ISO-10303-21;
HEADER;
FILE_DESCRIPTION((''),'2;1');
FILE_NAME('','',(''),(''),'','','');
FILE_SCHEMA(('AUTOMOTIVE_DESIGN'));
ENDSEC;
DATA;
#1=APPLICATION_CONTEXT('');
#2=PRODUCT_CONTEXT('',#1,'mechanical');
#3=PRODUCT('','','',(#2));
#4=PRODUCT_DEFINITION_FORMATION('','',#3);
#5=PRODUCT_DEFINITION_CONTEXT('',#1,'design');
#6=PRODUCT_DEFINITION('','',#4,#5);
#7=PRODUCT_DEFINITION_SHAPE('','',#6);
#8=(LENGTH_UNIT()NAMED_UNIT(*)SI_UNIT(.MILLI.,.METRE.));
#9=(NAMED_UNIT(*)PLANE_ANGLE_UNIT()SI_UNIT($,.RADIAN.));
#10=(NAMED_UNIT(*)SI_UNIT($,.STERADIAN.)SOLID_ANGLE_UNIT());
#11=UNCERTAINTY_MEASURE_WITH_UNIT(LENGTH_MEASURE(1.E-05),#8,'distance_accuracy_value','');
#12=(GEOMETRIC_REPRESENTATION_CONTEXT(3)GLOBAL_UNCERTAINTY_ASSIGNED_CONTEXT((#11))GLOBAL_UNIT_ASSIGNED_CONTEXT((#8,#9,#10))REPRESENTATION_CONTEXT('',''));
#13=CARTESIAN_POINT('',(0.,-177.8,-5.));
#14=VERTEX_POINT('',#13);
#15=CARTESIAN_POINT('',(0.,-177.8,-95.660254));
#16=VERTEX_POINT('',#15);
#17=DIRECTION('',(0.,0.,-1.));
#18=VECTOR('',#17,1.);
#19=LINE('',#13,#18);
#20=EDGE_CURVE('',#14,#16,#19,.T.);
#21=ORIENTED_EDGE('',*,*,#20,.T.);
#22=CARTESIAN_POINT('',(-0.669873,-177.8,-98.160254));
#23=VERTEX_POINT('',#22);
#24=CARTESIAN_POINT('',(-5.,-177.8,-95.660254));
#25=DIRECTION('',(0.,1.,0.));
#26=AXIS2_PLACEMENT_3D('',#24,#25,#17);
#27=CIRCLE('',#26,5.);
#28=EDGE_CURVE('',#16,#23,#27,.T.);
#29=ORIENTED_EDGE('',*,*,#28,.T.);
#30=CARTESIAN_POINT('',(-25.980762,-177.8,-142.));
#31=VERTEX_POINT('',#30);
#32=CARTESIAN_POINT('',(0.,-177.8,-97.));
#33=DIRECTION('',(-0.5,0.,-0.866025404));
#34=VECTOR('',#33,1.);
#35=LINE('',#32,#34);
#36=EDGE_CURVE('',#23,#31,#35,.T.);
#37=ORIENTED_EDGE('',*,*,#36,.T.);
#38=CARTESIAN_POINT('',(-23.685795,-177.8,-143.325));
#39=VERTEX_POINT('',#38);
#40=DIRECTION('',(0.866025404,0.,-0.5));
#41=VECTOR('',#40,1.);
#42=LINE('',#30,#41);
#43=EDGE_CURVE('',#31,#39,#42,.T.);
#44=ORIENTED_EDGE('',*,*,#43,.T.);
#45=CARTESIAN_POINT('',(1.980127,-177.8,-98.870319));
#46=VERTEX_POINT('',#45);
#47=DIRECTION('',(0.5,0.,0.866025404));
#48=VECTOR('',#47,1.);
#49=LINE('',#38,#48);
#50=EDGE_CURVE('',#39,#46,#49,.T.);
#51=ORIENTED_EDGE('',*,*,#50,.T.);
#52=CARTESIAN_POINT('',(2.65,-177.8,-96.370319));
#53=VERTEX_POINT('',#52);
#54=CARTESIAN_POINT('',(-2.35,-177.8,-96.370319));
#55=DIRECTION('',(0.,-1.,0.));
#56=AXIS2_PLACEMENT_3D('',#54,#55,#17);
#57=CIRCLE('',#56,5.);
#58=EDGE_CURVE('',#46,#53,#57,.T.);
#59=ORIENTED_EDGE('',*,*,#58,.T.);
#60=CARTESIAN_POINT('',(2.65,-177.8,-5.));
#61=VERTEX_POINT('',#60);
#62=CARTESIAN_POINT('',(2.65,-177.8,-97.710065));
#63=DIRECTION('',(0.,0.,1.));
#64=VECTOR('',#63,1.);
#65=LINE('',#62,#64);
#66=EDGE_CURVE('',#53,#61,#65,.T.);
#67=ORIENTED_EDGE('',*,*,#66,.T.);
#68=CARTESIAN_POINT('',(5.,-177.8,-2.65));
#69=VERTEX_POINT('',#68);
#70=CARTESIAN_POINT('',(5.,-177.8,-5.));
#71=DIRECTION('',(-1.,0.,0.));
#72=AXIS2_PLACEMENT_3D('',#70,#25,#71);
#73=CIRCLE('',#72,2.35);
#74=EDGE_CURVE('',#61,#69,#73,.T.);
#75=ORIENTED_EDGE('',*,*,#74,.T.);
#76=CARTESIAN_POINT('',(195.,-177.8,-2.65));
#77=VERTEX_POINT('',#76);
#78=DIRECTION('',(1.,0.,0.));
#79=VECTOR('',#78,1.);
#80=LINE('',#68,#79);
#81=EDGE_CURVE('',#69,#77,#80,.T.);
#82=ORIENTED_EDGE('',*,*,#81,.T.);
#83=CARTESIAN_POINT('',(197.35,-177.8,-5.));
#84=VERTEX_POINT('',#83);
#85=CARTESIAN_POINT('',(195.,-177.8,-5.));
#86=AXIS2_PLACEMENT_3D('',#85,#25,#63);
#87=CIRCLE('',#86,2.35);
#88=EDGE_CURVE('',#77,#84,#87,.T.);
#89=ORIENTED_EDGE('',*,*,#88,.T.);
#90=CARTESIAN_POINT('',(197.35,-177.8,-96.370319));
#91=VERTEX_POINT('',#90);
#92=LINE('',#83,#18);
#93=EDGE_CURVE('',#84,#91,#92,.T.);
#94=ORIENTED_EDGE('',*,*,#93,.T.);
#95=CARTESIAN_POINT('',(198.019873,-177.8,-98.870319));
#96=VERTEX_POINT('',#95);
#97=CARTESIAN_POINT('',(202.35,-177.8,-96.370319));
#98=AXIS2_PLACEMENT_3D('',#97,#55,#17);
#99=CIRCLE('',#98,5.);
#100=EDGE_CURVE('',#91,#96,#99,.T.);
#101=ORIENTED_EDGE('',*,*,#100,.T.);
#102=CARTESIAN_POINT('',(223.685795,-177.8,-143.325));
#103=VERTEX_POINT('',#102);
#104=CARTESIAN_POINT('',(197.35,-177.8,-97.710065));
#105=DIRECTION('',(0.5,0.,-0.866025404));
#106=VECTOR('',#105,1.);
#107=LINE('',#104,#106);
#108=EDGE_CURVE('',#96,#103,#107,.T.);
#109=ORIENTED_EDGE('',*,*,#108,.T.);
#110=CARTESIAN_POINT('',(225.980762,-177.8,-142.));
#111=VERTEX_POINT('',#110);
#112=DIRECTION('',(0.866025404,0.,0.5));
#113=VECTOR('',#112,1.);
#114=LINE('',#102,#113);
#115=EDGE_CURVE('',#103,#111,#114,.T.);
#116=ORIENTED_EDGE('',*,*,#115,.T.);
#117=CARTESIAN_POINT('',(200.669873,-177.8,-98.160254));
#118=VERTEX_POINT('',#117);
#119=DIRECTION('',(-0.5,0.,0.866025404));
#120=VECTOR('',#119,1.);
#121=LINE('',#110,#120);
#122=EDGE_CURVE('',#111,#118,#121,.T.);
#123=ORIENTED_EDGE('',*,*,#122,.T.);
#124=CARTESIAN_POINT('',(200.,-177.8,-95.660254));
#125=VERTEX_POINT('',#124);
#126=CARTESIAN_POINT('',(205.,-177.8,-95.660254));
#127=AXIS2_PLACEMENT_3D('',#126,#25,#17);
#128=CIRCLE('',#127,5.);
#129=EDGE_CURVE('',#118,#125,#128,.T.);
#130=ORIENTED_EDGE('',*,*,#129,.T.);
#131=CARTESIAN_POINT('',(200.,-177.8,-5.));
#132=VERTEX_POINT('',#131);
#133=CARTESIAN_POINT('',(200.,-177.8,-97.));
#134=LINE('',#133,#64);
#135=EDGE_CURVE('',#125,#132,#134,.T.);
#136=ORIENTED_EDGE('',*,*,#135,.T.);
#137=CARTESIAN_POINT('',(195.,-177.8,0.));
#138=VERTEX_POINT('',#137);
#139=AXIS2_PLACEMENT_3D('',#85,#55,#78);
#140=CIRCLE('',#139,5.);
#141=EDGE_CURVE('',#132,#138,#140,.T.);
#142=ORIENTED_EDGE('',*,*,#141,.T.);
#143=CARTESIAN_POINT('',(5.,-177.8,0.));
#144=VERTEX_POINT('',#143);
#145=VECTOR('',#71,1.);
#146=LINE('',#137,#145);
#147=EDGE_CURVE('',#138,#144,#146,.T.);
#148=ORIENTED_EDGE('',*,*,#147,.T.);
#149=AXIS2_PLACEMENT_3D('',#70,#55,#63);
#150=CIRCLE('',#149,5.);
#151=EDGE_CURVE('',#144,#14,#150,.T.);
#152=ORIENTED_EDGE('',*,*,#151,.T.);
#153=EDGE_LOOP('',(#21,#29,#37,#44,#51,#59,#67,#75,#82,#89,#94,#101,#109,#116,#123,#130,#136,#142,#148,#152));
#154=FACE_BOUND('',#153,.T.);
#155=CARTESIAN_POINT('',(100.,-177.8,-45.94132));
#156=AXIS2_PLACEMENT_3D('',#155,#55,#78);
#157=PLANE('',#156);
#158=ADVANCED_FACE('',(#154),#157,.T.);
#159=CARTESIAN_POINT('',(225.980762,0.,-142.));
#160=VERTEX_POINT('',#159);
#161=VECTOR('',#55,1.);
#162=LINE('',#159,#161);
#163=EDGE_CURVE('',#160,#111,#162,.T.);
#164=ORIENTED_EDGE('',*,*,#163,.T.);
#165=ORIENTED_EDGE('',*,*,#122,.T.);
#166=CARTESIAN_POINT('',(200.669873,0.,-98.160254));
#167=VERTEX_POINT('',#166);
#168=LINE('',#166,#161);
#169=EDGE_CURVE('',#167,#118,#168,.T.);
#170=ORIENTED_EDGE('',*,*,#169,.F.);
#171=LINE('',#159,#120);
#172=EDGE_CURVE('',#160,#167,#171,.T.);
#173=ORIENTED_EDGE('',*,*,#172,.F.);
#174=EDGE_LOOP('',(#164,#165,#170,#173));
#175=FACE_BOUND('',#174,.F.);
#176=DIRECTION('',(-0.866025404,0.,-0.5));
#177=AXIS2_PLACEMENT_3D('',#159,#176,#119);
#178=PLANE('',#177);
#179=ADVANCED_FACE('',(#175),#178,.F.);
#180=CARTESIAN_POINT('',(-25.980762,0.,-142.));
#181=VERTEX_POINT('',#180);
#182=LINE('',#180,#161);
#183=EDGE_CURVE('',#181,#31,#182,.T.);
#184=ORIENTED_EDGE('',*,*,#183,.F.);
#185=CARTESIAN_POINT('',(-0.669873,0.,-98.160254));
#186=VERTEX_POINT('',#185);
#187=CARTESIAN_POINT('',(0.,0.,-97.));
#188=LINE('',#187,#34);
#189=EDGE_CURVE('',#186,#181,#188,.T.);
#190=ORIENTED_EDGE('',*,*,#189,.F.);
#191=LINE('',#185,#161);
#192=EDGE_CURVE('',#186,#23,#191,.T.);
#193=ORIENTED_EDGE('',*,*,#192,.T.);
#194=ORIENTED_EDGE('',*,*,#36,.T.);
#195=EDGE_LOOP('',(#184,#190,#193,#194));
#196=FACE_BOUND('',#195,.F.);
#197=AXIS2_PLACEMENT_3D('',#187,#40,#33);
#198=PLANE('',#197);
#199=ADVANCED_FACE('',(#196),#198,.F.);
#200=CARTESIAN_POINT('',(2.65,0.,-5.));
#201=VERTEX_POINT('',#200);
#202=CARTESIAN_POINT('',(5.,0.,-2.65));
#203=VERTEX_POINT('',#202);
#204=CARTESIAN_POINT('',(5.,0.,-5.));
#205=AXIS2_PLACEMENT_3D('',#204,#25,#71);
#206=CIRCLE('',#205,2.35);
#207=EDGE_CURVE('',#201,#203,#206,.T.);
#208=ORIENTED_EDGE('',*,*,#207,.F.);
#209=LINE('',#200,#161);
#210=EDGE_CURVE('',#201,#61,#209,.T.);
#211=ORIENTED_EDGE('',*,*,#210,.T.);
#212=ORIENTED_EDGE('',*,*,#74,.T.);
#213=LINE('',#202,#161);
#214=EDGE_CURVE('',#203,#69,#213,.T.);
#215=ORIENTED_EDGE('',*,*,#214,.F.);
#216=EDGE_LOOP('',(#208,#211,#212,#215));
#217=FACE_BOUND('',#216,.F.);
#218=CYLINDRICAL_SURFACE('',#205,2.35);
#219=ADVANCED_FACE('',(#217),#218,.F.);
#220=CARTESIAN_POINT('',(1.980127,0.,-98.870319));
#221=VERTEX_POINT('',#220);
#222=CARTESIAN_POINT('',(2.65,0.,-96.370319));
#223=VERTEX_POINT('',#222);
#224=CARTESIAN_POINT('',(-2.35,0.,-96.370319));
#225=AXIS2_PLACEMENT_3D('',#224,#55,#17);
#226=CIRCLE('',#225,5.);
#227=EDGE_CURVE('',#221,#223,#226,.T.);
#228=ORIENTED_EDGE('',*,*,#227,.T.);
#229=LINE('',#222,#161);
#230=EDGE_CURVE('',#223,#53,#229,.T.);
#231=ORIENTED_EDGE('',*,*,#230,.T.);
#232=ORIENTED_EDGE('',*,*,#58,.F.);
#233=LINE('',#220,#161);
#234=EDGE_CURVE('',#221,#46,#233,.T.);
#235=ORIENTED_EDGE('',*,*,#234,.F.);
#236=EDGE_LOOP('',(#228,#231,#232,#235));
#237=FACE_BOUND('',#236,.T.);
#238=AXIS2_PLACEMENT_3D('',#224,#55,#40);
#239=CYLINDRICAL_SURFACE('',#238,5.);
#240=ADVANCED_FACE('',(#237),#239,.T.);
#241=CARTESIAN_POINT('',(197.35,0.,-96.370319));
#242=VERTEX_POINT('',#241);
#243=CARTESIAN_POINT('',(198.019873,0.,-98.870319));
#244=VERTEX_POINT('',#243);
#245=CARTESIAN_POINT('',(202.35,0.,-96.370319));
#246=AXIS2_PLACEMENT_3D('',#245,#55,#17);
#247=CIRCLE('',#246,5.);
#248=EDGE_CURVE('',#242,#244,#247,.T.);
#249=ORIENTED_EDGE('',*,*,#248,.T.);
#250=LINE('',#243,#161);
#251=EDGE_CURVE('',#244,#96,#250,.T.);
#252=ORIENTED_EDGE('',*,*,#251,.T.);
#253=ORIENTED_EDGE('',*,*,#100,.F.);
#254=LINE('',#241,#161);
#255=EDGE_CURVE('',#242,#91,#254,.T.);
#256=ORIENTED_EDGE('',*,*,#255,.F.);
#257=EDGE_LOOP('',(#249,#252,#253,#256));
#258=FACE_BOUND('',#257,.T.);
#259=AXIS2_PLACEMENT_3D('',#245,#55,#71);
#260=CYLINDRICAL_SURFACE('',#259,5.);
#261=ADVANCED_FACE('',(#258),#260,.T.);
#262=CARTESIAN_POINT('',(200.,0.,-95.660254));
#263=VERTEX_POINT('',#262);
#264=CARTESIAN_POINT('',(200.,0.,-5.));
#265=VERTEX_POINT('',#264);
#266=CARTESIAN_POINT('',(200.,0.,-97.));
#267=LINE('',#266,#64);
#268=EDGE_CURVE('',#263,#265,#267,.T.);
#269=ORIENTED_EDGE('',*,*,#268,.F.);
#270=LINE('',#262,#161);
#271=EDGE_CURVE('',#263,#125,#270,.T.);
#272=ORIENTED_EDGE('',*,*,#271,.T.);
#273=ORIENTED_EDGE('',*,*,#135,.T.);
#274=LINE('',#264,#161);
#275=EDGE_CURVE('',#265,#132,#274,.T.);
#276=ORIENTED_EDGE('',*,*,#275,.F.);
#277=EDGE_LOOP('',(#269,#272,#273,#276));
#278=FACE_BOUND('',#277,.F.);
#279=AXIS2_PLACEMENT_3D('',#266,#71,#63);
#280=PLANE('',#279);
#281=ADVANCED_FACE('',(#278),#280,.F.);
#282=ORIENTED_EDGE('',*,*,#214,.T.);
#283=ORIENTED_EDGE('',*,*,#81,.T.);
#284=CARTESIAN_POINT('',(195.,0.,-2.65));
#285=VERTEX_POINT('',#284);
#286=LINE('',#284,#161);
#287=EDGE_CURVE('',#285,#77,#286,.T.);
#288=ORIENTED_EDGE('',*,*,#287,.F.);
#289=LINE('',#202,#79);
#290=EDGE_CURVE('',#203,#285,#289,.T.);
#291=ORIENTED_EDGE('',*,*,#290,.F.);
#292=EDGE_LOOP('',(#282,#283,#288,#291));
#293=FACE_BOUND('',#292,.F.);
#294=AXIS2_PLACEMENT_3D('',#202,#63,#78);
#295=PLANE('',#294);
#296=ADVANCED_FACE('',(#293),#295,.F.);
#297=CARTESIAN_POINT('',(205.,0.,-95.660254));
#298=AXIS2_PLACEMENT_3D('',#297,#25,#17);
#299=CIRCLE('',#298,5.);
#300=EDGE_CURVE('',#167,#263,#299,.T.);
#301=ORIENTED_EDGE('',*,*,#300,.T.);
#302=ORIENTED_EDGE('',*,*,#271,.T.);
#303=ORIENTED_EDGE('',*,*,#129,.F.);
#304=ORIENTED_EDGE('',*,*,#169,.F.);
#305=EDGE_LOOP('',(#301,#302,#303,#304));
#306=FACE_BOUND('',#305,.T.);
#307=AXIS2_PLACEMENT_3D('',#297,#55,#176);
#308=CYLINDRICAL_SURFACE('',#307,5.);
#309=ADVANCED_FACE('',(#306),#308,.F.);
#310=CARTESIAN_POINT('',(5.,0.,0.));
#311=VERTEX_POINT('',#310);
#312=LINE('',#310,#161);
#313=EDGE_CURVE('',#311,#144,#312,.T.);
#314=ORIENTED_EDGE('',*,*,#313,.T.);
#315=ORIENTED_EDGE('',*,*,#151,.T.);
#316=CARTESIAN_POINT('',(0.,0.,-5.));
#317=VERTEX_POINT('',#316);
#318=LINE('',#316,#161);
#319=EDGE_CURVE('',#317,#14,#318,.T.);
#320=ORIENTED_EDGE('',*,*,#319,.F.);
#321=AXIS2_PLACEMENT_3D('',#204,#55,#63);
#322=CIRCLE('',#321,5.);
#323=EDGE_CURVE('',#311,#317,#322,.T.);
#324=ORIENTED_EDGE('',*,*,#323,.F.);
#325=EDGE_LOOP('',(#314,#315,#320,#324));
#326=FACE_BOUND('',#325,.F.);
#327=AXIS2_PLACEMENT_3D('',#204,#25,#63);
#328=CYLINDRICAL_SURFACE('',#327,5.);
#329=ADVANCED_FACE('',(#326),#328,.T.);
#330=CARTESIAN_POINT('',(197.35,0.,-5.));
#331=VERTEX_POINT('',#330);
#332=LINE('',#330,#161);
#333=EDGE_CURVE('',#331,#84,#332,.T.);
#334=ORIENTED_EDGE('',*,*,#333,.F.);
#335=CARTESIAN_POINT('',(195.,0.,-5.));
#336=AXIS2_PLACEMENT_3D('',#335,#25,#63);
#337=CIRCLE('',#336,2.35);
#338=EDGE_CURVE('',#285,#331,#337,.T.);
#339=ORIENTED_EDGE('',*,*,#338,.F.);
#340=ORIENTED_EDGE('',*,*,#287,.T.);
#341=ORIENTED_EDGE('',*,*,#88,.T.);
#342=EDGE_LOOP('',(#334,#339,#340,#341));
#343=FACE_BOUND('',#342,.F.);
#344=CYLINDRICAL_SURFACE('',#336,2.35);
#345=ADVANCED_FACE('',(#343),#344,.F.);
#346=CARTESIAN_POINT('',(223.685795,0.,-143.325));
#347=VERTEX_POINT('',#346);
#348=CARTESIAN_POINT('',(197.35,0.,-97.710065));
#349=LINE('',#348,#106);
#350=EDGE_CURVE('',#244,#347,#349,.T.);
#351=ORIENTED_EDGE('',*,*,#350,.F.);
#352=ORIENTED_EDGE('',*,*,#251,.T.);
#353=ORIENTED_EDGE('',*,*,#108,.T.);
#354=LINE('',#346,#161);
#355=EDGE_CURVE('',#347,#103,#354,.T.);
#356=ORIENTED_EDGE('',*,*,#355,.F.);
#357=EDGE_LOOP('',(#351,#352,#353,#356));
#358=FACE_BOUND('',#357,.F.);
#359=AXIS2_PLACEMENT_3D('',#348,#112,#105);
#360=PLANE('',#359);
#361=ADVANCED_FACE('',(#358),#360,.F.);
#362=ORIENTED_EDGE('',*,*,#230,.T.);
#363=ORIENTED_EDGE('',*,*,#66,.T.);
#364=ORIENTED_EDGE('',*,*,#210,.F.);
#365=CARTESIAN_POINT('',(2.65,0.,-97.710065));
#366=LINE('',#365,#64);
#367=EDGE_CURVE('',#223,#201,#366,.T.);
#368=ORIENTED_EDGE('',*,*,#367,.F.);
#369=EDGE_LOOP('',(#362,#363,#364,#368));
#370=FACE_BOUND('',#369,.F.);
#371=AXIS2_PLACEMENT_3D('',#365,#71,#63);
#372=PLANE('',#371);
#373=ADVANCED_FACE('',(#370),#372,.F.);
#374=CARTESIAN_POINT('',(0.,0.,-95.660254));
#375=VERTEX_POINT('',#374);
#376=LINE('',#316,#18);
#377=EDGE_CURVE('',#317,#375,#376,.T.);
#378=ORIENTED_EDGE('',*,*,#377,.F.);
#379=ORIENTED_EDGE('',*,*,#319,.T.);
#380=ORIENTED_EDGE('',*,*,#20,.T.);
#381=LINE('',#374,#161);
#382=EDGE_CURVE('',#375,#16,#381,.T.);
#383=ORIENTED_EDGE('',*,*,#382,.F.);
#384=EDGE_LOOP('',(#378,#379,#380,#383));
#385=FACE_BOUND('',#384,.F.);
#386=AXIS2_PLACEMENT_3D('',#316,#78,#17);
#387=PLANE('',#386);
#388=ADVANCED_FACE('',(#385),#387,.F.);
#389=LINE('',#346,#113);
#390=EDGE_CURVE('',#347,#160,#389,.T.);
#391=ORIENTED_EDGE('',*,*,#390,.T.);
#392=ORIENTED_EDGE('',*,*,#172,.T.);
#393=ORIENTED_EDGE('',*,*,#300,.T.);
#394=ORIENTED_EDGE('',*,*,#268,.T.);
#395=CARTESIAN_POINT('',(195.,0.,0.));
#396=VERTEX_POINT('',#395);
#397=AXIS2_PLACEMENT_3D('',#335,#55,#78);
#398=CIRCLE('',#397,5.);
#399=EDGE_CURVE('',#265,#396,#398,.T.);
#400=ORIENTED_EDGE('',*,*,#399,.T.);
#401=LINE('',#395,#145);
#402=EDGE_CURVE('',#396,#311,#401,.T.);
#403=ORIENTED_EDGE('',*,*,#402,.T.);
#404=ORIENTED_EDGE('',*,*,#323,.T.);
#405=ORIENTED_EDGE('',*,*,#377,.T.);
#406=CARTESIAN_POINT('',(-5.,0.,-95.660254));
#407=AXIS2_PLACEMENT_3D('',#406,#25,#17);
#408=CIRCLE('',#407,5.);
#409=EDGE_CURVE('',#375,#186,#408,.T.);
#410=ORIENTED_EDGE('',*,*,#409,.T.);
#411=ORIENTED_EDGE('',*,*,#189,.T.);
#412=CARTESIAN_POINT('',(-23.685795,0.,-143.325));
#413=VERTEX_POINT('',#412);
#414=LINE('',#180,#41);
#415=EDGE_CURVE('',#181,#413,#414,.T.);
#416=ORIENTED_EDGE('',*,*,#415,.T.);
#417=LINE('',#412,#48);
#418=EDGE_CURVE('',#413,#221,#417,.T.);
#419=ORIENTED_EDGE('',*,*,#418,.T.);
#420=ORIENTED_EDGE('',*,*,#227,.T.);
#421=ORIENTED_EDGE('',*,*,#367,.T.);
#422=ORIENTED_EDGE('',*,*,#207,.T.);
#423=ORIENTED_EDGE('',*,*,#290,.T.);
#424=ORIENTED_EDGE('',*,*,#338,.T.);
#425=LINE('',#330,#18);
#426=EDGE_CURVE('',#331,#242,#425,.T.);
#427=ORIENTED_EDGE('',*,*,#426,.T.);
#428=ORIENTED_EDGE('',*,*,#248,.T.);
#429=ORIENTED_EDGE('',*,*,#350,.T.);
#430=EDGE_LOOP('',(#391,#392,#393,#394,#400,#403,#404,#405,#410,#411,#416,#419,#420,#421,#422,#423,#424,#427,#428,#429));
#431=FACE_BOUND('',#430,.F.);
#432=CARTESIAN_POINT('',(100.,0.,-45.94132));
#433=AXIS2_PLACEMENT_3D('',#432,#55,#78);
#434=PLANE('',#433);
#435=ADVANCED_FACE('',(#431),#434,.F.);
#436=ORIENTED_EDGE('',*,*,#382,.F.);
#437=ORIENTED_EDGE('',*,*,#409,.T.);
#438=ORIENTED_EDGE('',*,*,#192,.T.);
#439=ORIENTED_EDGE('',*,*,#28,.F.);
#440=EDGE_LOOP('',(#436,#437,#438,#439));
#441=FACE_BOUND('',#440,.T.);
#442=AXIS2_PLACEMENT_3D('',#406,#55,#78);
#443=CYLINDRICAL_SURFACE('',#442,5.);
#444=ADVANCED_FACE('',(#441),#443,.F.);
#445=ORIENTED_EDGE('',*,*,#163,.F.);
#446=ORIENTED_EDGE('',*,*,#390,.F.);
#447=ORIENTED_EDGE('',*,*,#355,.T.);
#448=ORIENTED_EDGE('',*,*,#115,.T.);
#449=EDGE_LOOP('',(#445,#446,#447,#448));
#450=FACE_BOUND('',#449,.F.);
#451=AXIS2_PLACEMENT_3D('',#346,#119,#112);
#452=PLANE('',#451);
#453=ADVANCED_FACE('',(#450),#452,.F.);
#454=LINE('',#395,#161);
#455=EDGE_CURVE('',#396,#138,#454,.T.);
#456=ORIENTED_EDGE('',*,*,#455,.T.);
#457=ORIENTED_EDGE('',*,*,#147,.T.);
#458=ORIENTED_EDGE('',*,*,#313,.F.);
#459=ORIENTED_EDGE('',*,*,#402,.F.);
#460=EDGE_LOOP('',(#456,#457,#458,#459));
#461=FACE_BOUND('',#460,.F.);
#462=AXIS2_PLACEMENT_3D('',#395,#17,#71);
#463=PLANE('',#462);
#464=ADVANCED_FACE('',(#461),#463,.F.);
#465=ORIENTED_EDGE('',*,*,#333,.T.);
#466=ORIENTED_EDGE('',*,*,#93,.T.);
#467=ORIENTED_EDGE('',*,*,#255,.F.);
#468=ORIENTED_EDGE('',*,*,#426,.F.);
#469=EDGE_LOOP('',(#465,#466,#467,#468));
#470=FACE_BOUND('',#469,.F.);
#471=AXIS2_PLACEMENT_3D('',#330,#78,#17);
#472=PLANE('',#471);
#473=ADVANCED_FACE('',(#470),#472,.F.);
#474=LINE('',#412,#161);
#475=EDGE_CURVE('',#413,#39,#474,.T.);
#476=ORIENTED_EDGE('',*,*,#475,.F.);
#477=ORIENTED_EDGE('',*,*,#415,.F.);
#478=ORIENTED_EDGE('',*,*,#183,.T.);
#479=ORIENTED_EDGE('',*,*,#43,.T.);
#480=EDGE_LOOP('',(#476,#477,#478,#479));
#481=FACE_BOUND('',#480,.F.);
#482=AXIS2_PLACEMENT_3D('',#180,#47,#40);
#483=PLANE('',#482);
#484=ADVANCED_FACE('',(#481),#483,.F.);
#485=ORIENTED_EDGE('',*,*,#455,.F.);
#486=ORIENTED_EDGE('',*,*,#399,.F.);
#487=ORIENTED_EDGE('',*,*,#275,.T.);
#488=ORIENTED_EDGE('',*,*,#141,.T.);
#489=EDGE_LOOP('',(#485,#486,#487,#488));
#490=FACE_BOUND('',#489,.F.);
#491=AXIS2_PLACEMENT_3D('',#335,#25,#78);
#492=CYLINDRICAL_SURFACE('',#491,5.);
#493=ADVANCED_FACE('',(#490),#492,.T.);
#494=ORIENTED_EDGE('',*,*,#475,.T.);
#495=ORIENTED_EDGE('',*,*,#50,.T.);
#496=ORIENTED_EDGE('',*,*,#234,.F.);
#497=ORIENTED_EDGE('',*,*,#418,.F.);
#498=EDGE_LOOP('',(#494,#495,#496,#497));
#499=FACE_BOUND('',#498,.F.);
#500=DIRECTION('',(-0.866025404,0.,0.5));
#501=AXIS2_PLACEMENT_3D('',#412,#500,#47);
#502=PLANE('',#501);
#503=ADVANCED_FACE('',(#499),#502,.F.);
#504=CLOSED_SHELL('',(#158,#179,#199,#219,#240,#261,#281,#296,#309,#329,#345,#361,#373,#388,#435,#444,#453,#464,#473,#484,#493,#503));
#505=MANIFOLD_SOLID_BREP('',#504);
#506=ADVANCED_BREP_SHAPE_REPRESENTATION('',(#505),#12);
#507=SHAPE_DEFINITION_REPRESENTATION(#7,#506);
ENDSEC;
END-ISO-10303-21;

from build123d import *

# Parameters (mm, degrees)
F1_DEPTH = 177.8
F2_R     = 5


with BuildPart() as f1:
    # F0 (on Front) → F1 (new body)
    with BuildSketch(Plane.XZ):
        with BuildLine():
            Line((195, 0), (5, 0))
            ThreePointArc((5, 0), (1.4644660941, -1.4644660941), (0, -5))
            Line((0, -5), (0, -97))
            Line((0, -97), (-25.9807621135, -142))
            Line((-25.9807621135, -142), (-23.6857947935, -143.325))
            Line((-23.6857947935, -143.325), (2.65, -97.7100653599))
            Line((2.65, -97.7100653599), (2.65, -5))
            ThreePointArc((2.65, -5), (3.3382990642, -3.3382990642), (5, -2.65))
            Line((5, -2.65), (195, -2.65))
            ThreePointArc((195, -2.65), (196.6617009358, -3.3382990642), (197.35, -5))
            Line((197.35, -5), (197.35, -97.7100653599))
            Line((197.35, -97.7100653599), (223.6857947935, -143.325))
            Line((223.6857947935, -143.325), (225.9807621135, -142))
            Line((225.9807621135, -142), (200, -97))
            Line((200, -97), (200, -5))
            ThreePointArc((200, -5), (198.5355339059, -1.4644660941), (195, 0))
        make_face()
    extrude(amount=F1_DEPTH)

    # F2
    f2_edges = [f1.edges().sort_by_distance(p)[0] for p in [
        (200, -88.9, -97),
        (197.35, -88.9, -97.710065),
        (2.65, -88.9, -97.710065),
        (0, -88.9, -97),
    ]]
    fillet(f2_edges, radius=F2_R)


solid = f1.part
